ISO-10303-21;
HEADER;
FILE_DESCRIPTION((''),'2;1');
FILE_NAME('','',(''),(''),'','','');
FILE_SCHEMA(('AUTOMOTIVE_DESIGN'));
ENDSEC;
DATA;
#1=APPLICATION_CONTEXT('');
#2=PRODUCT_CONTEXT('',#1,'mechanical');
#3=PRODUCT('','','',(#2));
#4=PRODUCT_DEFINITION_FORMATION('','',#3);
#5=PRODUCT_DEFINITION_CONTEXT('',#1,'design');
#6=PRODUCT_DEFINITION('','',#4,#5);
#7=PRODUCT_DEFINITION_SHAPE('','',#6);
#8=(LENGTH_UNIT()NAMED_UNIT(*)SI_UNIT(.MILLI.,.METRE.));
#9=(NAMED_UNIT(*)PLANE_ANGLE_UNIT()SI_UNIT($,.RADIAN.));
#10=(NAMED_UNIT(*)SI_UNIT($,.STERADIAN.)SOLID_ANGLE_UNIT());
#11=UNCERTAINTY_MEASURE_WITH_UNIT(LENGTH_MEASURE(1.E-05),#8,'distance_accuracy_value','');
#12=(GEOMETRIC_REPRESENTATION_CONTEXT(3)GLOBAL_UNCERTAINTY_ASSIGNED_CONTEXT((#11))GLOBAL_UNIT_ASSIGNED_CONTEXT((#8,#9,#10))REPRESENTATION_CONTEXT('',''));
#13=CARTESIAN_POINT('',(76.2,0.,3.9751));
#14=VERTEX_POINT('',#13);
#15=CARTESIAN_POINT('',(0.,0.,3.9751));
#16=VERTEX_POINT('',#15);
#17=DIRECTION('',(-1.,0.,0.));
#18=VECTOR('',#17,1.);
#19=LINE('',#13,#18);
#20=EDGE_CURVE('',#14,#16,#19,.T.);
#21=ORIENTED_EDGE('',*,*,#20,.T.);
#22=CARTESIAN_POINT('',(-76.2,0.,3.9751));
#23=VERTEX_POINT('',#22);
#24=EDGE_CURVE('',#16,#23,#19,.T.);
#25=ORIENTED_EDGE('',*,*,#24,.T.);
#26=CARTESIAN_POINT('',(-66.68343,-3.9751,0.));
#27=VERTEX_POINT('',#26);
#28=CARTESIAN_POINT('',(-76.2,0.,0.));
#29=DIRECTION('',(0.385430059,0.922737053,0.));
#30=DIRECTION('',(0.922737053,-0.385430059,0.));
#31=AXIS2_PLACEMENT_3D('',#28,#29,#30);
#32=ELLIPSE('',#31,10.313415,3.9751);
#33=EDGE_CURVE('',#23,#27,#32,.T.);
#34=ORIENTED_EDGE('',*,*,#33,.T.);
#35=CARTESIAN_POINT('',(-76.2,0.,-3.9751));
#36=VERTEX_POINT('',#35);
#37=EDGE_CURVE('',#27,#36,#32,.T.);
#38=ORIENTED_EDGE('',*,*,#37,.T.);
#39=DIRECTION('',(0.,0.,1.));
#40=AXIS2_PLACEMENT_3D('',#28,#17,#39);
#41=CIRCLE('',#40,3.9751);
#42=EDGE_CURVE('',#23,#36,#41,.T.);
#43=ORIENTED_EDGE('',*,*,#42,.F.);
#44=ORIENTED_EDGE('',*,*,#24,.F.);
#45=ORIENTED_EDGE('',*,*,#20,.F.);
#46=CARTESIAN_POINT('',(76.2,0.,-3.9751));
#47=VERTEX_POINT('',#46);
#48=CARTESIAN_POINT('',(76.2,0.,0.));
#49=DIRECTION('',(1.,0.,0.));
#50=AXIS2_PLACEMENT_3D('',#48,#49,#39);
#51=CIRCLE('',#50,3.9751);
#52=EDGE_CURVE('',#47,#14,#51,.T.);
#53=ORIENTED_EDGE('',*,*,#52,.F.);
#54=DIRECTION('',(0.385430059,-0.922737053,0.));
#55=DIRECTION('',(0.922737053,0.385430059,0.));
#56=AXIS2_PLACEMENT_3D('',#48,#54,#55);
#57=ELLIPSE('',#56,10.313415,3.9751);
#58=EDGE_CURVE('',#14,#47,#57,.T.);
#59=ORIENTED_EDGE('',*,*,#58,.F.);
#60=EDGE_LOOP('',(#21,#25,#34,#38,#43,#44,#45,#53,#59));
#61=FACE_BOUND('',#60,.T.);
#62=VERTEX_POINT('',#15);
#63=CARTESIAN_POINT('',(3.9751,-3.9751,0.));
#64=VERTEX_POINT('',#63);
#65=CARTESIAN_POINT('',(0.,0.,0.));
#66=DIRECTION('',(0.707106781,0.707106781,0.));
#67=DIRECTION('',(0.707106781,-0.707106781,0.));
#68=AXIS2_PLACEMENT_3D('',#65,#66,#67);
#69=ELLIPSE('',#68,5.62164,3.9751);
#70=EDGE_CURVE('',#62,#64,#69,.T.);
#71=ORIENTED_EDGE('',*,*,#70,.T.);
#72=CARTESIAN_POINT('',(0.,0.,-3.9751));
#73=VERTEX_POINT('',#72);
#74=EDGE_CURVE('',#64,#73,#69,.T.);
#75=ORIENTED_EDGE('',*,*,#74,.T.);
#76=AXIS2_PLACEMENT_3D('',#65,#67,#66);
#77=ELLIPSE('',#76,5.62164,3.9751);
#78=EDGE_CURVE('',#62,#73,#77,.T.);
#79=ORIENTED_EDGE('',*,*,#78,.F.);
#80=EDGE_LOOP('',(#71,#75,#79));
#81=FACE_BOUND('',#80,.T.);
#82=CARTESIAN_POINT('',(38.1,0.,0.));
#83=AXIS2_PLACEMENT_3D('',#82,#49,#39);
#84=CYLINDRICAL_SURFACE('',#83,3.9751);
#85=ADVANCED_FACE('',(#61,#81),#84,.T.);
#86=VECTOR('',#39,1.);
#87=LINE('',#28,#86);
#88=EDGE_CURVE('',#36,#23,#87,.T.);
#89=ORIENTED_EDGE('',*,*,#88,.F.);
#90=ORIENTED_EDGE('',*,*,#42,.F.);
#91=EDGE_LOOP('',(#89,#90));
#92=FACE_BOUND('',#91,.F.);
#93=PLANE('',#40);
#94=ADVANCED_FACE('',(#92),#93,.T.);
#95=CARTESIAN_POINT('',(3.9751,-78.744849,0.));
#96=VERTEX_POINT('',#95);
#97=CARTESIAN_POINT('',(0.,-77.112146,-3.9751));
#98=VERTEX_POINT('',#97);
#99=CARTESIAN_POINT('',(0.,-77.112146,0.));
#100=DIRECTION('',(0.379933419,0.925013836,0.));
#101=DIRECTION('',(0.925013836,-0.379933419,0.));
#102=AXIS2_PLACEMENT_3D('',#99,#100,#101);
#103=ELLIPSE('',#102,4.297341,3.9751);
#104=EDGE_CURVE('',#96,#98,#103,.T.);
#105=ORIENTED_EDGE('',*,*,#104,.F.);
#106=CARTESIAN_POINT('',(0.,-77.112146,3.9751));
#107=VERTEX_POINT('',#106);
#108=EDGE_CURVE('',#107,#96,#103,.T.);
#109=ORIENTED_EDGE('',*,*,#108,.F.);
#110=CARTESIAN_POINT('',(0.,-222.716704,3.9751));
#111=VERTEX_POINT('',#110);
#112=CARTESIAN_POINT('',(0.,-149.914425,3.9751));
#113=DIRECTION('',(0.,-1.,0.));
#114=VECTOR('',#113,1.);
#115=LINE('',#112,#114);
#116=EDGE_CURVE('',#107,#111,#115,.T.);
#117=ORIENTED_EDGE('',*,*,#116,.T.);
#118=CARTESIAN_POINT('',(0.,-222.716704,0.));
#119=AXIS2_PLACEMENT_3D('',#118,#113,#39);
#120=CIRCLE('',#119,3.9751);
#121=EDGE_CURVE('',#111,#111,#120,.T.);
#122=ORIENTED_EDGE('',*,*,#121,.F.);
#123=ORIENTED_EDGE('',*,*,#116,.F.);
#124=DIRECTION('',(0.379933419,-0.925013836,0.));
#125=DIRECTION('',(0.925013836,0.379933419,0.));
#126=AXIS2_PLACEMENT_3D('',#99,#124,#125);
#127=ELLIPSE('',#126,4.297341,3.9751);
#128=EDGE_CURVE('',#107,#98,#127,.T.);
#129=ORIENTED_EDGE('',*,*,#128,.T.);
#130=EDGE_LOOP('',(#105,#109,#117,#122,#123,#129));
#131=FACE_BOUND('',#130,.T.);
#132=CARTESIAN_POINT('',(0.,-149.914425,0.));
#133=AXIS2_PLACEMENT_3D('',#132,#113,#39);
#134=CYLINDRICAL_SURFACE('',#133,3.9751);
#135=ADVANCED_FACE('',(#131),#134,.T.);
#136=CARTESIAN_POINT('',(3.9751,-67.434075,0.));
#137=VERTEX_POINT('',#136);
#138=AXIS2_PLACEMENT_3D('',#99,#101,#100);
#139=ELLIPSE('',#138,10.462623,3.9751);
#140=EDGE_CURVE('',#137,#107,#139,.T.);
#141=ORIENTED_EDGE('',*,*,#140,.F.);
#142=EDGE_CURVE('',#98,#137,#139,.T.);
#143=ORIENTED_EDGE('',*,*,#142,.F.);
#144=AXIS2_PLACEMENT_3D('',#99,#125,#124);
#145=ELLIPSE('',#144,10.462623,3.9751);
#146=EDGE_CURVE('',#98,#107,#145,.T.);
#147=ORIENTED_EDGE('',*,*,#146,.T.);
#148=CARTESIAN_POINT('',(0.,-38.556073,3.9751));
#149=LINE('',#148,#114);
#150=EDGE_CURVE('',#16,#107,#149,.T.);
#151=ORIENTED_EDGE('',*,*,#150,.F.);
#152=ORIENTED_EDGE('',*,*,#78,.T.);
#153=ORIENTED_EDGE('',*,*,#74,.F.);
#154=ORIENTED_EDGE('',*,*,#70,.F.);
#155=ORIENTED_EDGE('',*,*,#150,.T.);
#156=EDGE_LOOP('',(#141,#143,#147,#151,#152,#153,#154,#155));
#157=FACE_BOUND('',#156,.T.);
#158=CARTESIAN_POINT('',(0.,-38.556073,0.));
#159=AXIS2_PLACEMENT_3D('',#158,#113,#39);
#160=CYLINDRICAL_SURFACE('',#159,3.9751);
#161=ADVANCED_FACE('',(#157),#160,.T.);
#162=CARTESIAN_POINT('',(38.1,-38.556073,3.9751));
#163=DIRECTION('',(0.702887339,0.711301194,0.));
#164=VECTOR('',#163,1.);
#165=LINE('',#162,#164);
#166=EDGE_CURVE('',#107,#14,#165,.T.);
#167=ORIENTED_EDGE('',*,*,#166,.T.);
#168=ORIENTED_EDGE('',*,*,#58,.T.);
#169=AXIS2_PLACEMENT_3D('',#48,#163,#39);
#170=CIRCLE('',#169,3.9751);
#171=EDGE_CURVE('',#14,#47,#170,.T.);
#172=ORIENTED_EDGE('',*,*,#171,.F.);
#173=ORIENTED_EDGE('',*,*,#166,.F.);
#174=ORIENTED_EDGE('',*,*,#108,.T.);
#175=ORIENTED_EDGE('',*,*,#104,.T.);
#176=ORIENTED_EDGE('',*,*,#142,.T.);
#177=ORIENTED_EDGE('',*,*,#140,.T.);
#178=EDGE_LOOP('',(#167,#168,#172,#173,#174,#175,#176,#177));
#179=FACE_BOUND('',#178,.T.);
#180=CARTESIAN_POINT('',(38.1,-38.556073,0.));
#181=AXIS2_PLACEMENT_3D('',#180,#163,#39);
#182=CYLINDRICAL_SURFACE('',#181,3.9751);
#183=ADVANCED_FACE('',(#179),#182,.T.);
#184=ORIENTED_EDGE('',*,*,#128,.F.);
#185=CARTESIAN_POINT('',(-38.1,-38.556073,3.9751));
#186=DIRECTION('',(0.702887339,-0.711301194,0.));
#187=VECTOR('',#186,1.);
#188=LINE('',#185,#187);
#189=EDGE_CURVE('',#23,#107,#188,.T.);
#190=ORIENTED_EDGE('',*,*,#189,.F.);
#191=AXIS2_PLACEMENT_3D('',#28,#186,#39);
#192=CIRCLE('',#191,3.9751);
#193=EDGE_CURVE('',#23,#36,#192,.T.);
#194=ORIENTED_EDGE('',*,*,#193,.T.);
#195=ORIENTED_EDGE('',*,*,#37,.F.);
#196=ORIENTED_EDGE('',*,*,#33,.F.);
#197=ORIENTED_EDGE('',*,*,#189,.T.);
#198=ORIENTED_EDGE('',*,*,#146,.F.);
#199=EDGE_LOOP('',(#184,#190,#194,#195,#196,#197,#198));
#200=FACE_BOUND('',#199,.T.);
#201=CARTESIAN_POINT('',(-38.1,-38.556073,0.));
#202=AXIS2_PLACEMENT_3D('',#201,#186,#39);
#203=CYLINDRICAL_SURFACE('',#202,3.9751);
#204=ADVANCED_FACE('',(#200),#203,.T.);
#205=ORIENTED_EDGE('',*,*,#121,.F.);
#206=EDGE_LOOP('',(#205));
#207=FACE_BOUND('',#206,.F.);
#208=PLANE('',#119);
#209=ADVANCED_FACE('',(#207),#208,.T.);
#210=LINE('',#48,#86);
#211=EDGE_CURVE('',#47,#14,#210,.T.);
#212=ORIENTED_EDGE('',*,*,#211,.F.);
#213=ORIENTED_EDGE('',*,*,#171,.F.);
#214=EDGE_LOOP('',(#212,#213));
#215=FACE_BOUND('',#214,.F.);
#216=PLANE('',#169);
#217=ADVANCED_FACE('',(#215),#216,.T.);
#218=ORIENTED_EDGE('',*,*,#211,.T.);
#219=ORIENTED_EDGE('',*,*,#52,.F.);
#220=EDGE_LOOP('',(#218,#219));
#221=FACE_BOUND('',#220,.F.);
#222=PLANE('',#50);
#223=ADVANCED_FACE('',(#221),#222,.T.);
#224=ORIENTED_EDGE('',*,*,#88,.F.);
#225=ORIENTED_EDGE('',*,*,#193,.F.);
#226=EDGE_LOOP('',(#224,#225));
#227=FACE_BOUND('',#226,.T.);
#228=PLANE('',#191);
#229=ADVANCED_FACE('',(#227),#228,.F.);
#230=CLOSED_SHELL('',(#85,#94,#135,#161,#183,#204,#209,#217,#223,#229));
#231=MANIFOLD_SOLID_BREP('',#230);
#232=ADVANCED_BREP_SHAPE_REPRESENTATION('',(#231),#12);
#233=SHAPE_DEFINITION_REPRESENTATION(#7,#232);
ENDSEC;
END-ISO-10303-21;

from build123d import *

# Parameters (mm, degrees)
F1_E1_W  = 76.2
F1_E1_H  = 3.9751
F3_E0_W  = 76.2
F3_E0_H  = 3.9751
F5_E3_W  = 108.4099765605
F5_E3_H  = 3.9751
F7_E2_W  = 108.4099765605
F7_E2_H  = 3.9751
F9_E4_W  = 77.1121457219
F9_E4_H  = 3.9751
F11_E5_W = 145.6045582891
F11_E5_H = 3.9751


with BuildPart() as f2:
    # F1_E1 (on explicit) → F2 (revolve)
    with BuildSketch(Plane(origin=(0, 0, 0), x_dir=(-1, 0, 0), z_dir=(0, 1, 0))):
        with Locations((38.1, 1.98755)):
            Rectangle(F1_E1_W, F1_E1_H)
    revolve(axis=Axis((-38.1, 0, 0), (-1, 0, 0)))

    # F3_E0 (on explicit) → F4 (revolve)
    with BuildSketch(Plane.XZ):
        with Locations((38.1, 1.98755)):
            Rectangle(F3_E0_W, F3_E0_H)
    revolve(axis=Axis((38.1, 0, 0), (1, 0, 0)))

    # F5_E3 (on explicit) → F6 (revolve)
    with BuildSketch(Plane(origin=(0, -77.1121457219, 0), x_dir=(0.7028873395, 0.7113011936, 0), z_dir=(0.7113011936, -0.7028873395, 0))):
        with Locations((54.2049882802, 1.98755)):
            Rectangle(F5_E3_W, F5_E3_H)
    revolve(axis=Axis((38.1, -38.556072861, 0), (0.7028873395, 0.7113011936, 0)))

    # F7_E2 (on explicit) → F8 (revolve)
    with BuildSketch(Plane(origin=(-76.2, 0, 0), x_dir=(0.7028873395, -0.7113011936, 0), z_dir=(-0.7113011936, -0.7028873395, 0))):
        with Locations((54.2049882802, 1.98755)):
            Rectangle(F7_E2_W, F7_E2_H)
    revolve(axis=Axis((-38.1, -38.556072861, 0), (0.7028873395, -0.7113011936, 0)))

    # F9_E4 (on explicit) → F10 (revolve)
    with BuildSketch(Plane(origin=(0, 0, 0), x_dir=(0, -1, 0), z_dir=(-1, 0, 0))):
        with Locations((38.556072861, 1.98755)):
            Rectangle(F9_E4_W, F9_E4_H)
    revolve(axis=Axis((0, -38.556072861, 0), (0, -1, 0)))

    # F11_E5 (on explicit) → F12 (revolve)
    with BuildSketch(Plane(origin=(0, -77.1121457219, 0), x_dir=(0, -1, 0), z_dir=(-1, 0, 0))):
        with Locations((72.8022791445, 1.98755)):
            Rectangle(F11_E5_W, F11_E5_H)
    revolve(axis=Axis((0, -149.9144248664, 0), (0, -1, 0)))


solid = f2.part
